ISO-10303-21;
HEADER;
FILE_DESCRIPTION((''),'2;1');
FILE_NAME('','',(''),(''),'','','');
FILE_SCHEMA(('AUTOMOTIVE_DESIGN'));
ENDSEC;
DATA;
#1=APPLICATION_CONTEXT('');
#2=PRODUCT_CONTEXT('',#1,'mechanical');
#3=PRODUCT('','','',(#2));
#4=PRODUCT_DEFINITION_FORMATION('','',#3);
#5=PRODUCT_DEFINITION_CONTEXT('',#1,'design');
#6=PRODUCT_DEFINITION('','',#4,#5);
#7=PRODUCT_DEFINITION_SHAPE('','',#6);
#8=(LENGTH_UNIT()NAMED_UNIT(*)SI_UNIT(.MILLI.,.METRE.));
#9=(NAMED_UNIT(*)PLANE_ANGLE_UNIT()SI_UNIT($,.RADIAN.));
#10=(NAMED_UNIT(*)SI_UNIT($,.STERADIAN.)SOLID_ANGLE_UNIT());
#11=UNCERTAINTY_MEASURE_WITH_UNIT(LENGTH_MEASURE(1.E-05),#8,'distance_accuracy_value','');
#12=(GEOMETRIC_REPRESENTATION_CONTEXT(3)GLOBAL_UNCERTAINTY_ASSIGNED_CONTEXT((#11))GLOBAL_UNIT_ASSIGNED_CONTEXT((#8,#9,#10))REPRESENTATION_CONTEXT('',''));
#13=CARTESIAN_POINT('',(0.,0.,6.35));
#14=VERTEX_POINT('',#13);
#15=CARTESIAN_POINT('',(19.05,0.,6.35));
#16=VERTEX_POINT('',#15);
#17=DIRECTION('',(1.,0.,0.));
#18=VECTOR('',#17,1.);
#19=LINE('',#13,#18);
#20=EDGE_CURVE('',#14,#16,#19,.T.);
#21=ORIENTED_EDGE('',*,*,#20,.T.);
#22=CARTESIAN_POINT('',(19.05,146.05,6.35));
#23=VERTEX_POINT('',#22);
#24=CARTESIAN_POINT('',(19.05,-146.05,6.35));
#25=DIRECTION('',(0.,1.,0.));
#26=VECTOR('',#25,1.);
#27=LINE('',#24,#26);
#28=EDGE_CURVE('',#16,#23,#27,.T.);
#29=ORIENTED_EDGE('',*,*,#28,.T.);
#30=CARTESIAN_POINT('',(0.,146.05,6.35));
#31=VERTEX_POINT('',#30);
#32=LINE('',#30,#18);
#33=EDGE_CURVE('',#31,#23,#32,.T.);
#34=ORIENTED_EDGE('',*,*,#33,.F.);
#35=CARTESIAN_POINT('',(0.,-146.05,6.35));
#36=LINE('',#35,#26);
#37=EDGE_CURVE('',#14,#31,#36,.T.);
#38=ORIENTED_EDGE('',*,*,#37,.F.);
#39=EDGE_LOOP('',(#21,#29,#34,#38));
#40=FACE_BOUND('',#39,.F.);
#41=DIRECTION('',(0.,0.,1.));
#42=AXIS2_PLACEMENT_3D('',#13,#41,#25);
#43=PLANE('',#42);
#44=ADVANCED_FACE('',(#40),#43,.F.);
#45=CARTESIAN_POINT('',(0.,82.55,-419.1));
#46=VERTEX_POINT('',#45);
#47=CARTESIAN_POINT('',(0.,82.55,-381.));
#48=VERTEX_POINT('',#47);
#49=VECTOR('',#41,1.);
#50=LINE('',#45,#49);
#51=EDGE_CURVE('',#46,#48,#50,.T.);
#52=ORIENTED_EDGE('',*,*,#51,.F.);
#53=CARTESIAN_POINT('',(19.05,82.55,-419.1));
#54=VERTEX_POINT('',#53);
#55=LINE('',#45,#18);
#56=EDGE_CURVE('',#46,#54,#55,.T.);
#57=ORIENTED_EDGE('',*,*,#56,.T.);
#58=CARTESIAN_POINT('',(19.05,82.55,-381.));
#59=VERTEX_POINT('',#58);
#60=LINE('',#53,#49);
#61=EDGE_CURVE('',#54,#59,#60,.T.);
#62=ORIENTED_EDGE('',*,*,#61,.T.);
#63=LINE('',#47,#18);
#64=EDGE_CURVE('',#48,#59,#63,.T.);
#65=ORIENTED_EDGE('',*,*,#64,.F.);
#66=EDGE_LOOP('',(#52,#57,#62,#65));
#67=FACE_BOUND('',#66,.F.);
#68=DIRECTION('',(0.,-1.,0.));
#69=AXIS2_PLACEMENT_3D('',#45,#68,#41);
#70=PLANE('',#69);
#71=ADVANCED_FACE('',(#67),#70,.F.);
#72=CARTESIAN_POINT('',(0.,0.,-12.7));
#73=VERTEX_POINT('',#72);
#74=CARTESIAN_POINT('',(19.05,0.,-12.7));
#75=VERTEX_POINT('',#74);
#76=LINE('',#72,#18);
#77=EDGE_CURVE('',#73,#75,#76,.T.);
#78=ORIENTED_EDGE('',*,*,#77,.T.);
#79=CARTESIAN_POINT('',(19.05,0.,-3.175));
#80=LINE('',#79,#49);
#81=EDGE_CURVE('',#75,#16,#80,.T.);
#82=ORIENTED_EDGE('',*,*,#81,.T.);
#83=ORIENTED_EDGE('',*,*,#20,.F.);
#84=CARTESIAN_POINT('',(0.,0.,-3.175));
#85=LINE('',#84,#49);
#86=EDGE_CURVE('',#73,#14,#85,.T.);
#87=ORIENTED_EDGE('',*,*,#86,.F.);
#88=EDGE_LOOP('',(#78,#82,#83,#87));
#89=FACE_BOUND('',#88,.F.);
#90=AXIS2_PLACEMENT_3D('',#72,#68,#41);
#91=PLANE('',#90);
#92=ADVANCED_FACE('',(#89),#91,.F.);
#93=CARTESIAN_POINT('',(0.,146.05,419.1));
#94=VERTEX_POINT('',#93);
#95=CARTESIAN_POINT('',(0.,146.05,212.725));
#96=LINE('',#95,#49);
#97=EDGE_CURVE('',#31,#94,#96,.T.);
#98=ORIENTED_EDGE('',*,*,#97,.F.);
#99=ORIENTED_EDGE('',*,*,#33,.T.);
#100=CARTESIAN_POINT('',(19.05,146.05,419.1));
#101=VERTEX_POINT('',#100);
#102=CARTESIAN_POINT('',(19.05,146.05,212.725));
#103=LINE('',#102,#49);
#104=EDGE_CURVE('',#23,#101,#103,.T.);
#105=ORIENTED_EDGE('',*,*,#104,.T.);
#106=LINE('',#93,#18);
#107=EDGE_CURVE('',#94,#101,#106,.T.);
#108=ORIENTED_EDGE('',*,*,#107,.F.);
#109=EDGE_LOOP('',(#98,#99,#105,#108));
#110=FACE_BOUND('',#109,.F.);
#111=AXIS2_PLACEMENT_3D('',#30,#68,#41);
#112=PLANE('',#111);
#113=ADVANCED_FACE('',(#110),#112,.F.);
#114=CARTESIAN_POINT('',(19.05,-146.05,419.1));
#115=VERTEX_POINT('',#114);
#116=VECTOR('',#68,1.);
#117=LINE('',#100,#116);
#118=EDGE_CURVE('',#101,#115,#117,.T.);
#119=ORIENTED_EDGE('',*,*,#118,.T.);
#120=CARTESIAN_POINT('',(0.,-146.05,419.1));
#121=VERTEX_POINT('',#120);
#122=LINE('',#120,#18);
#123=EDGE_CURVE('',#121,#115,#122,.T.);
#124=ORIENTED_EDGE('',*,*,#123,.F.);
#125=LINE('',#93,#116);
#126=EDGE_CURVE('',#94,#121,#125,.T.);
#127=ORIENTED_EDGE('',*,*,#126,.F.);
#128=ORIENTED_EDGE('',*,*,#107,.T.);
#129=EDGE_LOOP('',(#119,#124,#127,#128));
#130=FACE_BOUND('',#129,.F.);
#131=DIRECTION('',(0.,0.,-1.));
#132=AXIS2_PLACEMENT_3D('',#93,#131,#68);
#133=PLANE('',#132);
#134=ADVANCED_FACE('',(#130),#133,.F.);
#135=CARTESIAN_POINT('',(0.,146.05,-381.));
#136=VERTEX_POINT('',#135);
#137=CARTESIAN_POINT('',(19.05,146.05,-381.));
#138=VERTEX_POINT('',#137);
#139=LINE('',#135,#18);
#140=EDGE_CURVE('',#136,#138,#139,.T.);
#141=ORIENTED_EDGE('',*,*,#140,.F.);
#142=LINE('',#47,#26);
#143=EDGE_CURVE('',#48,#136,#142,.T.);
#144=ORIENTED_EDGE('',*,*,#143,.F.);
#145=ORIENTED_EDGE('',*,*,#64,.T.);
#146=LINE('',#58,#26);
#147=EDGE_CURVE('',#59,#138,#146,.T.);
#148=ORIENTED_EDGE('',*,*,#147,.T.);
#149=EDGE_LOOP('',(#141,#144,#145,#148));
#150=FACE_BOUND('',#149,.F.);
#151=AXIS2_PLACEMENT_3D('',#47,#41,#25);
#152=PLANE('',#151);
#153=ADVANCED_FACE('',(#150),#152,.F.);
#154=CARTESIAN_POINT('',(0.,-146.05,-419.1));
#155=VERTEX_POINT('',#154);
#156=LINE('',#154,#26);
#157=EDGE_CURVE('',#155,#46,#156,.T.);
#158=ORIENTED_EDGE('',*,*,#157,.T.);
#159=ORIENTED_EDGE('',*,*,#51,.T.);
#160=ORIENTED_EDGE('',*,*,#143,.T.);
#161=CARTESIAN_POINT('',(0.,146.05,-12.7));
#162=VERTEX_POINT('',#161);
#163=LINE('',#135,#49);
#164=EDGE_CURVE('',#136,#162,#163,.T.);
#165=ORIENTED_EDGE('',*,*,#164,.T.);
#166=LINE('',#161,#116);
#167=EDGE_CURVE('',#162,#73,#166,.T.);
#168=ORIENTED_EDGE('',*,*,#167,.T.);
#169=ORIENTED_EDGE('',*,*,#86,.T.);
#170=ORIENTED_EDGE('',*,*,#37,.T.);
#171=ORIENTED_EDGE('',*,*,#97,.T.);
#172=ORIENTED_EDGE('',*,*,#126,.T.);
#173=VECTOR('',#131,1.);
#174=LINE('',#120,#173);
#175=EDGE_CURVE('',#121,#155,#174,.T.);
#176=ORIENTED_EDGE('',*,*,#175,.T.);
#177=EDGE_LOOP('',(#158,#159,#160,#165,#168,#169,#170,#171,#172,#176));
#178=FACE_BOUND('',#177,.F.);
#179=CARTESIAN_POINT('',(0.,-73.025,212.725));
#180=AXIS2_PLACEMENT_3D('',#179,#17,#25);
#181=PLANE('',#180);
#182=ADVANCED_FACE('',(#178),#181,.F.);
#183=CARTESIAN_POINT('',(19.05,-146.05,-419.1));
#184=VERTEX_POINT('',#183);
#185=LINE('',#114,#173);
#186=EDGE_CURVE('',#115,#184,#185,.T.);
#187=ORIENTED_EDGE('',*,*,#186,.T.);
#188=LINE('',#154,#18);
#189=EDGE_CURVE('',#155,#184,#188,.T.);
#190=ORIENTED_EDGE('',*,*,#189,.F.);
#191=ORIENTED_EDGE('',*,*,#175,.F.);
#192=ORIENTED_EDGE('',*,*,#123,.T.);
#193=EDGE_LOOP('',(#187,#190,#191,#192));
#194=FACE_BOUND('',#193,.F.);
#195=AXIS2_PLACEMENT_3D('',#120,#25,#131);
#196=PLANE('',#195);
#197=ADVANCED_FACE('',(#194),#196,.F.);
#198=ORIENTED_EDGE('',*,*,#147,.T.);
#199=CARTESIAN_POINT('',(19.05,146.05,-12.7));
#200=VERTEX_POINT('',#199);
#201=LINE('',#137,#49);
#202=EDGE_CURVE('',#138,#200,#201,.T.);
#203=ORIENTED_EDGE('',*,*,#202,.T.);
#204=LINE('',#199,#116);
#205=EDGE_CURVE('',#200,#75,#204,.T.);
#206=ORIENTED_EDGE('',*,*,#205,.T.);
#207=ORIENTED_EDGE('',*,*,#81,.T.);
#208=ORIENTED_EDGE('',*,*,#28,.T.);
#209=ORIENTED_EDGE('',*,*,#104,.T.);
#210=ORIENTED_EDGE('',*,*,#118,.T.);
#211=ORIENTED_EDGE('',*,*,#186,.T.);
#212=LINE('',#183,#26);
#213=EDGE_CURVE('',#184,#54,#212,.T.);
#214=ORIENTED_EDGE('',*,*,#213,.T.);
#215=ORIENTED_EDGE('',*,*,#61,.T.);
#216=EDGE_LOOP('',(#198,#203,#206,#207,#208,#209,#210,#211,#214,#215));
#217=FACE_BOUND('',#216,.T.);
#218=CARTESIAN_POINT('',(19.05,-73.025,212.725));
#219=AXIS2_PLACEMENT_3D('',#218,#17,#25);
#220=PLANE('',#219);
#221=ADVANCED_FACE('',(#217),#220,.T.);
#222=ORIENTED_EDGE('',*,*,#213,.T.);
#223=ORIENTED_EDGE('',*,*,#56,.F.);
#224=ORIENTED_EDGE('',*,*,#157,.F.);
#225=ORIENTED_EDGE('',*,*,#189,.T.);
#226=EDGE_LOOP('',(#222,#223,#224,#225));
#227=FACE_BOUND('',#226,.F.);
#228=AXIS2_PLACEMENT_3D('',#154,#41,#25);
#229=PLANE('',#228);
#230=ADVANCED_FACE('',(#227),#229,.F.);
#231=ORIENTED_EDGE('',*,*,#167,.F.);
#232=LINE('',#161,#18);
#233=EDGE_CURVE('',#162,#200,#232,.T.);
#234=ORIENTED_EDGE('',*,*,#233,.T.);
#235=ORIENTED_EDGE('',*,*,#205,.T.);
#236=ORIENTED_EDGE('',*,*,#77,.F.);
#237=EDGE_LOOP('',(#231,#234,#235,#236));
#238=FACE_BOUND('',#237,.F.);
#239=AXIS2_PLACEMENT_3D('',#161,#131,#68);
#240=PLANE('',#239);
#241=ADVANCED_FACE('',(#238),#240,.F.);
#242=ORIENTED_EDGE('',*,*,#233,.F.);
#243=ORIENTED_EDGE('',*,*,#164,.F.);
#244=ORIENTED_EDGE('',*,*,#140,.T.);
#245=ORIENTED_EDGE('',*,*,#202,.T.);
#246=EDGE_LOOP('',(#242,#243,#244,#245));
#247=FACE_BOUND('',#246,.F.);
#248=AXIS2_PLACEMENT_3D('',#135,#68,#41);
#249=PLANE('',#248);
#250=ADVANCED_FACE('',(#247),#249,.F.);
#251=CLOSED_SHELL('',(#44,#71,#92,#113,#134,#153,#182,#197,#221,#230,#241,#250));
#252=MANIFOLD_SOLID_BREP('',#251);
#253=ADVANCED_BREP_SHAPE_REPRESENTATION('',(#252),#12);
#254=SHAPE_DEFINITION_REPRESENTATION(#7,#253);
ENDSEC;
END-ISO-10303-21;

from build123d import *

# Parameters (mm, degrees)
F0_W     = 146.05
F0_H     = 412.75
F0_H_2   = 406.4
F0_H_3   = 19.05
F1_DEPTH = 19.05


with BuildPart() as f1:
    # F0 (on Right) → F1 (new body)
    with BuildSketch(Plane.YZ):
        with Locations((-73.025, 212.725)):
            Rectangle(F0_W, F0_H)
        with Locations((73.025, 212.725)):
            Rectangle(F0_W, F0_H)
        Polygon((146.05, -12.7), (0, -12.7), (0, -419.1), (82.55, -419.1), (82.55, -381), (146.05, -381), align=None)
        with Locations((-73.025, -215.9)):
            Rectangle(F0_W, F0_H_2)
        with Locations((-73.025, -3.175)):
            Rectangle(F0_W, F0_H_3)
    extrude(amount=F1_DEPTH)


solid = f1.part
